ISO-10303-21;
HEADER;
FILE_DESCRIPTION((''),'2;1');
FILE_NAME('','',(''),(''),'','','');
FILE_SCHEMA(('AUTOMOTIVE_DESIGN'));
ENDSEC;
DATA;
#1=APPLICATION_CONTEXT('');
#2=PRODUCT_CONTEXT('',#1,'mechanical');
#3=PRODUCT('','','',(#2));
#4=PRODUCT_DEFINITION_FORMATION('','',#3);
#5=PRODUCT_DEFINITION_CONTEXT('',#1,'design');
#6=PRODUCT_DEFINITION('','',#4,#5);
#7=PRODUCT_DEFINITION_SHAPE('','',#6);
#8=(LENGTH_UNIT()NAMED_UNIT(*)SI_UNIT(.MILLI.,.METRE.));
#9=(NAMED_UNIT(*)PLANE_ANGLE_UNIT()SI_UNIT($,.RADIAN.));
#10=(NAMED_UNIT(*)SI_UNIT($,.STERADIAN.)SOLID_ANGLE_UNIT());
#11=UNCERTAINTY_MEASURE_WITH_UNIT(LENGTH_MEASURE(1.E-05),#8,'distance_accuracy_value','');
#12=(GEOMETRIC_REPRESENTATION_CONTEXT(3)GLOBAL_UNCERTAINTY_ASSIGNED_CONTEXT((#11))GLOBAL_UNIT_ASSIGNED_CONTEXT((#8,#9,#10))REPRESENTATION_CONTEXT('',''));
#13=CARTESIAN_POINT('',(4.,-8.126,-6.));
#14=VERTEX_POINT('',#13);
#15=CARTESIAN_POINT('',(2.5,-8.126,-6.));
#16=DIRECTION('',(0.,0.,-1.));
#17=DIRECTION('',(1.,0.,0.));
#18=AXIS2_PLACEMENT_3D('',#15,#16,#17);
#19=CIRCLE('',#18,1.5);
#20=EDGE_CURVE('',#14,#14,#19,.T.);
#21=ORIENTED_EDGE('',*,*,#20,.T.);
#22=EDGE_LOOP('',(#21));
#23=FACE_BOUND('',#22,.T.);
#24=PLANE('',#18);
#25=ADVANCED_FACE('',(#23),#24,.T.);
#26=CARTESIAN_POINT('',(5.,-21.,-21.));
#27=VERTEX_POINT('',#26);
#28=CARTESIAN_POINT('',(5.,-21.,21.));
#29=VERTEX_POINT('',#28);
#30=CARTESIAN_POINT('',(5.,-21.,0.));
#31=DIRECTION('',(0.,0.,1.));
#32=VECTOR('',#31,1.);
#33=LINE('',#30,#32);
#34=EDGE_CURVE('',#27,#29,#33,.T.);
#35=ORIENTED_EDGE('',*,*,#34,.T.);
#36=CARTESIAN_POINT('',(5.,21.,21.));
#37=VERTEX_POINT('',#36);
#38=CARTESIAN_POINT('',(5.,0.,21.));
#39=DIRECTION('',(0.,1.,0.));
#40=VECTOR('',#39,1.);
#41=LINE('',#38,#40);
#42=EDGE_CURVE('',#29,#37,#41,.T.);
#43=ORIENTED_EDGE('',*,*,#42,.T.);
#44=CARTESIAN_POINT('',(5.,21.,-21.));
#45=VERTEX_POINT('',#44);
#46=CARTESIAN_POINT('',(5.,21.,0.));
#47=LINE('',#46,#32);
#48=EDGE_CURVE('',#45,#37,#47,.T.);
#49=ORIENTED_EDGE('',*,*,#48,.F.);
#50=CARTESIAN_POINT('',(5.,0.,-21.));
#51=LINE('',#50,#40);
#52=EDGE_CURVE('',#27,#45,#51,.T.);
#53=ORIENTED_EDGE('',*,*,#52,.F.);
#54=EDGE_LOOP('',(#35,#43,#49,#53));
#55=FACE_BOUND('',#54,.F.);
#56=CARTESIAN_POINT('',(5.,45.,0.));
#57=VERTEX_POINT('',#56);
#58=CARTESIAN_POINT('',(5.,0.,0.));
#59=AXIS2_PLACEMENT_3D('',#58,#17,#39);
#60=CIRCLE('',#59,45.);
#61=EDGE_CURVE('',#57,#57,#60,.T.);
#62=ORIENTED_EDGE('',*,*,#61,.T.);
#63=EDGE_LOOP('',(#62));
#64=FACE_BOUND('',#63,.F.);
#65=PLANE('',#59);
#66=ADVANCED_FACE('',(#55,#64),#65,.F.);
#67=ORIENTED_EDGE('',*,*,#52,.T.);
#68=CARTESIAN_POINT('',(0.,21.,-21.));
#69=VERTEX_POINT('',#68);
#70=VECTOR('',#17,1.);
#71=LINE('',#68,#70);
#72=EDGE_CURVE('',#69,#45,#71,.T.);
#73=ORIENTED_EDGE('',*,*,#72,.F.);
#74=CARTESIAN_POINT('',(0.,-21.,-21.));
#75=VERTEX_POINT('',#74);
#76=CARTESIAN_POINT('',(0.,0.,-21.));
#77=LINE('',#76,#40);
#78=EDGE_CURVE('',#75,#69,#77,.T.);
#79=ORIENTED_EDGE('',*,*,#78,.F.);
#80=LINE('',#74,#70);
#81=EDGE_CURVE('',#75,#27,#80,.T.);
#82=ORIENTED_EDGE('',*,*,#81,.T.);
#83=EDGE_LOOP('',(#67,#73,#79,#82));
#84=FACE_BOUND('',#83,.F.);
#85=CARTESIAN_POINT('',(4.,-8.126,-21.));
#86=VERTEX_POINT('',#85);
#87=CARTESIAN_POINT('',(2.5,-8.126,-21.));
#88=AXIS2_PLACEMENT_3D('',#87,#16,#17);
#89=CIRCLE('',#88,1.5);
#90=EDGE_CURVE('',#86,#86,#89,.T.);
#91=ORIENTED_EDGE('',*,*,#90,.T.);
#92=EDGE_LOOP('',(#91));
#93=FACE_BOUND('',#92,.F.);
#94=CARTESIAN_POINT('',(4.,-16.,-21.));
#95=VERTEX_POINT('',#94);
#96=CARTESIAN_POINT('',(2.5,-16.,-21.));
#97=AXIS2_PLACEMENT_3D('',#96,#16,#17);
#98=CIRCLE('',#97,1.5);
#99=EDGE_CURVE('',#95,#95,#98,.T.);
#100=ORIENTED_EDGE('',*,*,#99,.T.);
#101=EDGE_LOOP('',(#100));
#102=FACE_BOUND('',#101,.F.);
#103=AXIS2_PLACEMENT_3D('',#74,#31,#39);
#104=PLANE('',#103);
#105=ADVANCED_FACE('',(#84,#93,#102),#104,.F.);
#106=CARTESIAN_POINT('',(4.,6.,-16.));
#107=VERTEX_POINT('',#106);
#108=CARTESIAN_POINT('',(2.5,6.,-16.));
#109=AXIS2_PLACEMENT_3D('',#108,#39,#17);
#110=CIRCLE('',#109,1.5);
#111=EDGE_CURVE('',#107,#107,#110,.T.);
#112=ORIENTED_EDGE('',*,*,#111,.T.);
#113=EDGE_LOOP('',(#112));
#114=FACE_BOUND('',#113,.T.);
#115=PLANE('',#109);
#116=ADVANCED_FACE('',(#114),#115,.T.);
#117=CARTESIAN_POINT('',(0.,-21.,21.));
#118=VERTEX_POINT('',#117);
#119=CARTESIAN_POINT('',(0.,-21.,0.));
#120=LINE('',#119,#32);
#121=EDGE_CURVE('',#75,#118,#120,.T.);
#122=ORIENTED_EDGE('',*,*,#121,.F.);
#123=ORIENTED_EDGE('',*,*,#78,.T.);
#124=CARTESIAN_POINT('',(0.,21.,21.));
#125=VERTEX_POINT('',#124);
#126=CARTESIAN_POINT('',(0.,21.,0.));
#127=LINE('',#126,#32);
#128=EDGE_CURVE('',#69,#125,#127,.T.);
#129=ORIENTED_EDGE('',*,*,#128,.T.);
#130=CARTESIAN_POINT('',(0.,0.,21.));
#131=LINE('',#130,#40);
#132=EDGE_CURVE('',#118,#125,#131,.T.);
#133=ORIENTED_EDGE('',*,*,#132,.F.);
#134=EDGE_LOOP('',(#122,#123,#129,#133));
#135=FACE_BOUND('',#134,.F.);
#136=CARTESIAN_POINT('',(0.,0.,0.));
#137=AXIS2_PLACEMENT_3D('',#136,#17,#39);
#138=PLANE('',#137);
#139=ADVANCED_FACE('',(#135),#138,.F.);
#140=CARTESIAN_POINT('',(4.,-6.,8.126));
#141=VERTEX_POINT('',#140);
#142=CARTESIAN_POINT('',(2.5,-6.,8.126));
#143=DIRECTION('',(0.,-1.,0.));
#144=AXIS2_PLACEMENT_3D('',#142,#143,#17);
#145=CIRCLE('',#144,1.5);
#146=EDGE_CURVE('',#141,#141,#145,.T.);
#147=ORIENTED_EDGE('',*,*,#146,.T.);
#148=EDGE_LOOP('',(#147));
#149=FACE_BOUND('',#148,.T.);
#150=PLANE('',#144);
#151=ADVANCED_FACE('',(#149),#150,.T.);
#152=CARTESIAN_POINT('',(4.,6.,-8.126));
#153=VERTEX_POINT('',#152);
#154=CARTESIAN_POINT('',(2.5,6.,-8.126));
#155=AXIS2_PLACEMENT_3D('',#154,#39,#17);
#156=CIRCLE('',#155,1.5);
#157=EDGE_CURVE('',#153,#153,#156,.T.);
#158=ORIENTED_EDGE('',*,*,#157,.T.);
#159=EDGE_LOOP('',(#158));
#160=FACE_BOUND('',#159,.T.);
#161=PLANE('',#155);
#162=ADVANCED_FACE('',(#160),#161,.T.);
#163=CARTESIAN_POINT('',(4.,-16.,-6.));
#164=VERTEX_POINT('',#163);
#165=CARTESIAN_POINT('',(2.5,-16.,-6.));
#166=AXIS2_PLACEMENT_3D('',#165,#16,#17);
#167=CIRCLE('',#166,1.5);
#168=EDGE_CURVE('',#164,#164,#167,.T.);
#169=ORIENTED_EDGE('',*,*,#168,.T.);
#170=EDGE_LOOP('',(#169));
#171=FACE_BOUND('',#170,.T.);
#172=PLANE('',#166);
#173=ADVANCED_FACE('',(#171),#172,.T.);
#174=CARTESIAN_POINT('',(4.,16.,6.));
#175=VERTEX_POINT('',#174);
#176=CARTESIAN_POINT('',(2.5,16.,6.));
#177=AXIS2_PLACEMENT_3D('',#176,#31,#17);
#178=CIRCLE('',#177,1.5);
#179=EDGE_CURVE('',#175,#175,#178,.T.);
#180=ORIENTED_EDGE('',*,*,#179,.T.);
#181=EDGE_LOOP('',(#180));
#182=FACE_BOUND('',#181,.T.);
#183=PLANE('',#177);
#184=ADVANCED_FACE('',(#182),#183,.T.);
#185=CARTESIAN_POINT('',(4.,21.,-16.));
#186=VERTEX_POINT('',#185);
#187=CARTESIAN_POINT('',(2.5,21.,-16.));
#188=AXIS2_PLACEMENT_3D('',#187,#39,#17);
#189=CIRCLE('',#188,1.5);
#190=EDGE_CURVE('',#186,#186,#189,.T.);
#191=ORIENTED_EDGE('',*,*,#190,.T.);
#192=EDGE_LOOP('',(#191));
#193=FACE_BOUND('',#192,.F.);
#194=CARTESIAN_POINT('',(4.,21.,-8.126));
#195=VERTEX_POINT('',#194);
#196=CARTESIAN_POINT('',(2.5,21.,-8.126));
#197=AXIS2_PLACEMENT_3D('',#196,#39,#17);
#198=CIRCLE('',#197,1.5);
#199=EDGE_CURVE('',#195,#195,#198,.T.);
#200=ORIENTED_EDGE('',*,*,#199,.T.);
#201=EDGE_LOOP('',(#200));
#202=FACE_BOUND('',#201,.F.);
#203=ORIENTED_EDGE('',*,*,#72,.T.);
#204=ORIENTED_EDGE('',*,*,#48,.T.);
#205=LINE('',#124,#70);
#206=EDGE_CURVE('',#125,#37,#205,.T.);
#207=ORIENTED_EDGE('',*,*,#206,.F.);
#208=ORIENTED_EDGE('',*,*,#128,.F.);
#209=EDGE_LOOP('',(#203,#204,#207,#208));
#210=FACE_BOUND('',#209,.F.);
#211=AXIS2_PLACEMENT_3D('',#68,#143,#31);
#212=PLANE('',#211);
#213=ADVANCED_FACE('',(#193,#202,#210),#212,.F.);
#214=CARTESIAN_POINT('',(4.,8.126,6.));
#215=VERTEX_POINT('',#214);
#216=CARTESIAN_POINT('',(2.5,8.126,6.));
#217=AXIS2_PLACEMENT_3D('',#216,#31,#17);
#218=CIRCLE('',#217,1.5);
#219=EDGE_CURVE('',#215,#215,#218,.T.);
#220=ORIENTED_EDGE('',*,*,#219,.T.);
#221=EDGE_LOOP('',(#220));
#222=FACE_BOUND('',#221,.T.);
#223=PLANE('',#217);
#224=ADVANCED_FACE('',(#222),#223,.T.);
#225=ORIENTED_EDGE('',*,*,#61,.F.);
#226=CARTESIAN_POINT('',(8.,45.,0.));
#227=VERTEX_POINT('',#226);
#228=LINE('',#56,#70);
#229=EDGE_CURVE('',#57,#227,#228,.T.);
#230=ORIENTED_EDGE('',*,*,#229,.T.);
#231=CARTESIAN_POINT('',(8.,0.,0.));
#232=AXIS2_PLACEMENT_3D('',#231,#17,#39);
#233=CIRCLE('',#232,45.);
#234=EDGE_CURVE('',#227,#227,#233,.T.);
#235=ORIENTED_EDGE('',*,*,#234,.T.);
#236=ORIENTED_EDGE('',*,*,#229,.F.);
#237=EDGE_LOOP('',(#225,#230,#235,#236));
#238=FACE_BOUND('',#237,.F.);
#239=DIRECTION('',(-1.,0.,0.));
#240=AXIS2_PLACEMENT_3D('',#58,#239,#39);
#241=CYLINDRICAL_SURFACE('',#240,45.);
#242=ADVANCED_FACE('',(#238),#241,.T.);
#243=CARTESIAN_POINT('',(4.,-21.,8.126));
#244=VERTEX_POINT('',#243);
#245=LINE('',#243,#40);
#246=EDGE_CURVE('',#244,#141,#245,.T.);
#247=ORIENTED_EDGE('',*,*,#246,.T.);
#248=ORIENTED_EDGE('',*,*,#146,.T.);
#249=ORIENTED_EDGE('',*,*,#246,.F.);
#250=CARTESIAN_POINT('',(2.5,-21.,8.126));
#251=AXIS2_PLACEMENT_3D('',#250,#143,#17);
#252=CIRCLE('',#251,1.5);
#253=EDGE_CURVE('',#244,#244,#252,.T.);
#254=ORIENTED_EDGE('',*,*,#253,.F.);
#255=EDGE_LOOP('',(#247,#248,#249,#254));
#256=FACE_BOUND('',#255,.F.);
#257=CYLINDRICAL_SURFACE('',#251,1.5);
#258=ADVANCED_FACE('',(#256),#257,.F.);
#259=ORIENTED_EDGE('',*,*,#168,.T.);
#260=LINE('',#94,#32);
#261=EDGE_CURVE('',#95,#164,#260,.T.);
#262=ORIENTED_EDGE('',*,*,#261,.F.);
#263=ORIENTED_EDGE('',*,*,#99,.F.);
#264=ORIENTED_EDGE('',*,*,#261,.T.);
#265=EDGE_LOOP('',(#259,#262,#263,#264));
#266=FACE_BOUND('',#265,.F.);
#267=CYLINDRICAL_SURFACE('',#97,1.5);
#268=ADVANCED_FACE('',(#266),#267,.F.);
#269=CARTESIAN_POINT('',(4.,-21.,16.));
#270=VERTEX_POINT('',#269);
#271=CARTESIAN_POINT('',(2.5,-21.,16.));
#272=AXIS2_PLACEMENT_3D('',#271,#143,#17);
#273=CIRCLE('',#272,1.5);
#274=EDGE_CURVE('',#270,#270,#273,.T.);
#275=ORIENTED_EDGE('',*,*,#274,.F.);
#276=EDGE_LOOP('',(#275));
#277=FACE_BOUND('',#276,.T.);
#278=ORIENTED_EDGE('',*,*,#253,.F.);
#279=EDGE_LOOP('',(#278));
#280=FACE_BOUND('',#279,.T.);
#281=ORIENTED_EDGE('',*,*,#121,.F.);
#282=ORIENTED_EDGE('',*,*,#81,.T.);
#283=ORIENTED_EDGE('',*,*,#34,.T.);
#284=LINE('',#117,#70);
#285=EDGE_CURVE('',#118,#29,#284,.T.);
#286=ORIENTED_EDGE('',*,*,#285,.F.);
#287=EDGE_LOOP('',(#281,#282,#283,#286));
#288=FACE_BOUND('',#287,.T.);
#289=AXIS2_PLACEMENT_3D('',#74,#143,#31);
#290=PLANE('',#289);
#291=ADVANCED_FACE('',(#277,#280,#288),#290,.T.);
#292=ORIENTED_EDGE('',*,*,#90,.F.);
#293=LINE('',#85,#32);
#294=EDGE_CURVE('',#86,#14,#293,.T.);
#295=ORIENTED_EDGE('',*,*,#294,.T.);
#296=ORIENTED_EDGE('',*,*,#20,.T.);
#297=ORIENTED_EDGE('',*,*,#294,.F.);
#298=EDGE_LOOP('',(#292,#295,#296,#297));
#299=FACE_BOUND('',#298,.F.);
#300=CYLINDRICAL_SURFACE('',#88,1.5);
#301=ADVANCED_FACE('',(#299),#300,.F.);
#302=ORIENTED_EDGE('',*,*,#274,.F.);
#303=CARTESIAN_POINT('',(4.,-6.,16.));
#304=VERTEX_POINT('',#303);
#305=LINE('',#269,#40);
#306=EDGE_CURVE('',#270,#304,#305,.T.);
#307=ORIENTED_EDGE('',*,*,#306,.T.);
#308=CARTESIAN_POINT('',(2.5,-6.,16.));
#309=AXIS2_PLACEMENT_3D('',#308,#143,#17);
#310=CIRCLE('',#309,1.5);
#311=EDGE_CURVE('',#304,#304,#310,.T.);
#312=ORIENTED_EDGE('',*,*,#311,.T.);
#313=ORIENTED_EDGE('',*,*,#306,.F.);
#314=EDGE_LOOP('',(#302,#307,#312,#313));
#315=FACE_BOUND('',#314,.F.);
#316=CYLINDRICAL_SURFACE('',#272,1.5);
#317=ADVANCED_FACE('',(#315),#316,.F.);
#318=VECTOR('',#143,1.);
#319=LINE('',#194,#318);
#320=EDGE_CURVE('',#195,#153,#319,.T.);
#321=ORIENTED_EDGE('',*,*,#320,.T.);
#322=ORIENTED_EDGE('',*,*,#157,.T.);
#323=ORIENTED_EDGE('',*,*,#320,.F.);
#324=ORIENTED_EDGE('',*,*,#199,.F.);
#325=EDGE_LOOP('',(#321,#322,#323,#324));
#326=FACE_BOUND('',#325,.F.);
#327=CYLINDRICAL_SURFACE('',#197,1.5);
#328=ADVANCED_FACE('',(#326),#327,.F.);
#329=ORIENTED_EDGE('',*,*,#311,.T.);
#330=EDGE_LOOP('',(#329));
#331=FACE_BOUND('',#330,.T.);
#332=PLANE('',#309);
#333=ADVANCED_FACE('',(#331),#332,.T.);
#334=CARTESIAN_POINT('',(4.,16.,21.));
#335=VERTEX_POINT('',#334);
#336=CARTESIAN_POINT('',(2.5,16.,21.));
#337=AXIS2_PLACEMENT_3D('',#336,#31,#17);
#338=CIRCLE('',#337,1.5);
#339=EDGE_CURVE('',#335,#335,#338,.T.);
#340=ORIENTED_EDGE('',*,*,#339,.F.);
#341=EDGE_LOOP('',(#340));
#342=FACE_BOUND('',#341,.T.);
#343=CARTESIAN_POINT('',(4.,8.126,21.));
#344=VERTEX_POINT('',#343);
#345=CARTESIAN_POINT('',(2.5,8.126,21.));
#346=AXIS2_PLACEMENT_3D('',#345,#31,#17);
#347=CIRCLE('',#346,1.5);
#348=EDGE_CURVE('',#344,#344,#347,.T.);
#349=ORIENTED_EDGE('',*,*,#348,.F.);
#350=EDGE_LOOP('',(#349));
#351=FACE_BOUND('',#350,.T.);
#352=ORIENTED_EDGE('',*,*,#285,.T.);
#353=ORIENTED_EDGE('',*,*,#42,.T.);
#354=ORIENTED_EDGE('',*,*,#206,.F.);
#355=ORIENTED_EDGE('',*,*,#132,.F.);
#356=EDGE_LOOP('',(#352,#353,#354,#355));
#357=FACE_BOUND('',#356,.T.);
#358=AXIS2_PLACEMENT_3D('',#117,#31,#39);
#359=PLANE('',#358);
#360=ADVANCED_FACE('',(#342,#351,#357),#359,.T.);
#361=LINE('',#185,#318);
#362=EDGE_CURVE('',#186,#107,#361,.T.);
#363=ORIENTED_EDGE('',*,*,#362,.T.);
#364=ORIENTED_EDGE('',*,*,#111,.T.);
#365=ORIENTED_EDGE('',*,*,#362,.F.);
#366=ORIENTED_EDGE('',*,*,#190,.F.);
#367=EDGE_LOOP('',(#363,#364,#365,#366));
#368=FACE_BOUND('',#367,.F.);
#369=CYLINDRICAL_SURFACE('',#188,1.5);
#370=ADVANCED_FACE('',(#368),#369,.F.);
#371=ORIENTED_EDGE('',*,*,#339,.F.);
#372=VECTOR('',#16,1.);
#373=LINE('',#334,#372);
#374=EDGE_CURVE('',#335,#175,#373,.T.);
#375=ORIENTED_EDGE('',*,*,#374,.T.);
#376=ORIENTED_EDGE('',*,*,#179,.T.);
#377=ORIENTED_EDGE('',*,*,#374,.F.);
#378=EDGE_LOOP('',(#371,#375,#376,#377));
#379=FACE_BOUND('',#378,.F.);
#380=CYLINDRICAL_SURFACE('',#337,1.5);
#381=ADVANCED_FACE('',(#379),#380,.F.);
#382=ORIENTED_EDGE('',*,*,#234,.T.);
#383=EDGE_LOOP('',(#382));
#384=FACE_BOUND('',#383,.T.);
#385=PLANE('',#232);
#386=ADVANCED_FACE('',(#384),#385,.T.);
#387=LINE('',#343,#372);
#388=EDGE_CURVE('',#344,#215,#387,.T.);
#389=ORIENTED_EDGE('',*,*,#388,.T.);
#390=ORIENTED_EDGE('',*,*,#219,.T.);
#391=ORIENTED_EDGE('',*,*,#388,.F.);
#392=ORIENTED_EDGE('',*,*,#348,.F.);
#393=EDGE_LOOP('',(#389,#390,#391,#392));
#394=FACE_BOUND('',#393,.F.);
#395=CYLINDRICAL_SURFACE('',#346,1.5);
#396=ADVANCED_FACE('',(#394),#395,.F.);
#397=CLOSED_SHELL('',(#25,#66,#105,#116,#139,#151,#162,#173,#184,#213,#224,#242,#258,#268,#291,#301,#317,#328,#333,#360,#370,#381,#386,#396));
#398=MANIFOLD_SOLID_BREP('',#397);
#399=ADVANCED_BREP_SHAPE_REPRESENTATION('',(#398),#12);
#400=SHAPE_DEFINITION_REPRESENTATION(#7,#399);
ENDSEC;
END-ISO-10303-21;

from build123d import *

# Parameters (mm, degrees)
F0_W            = 42
F0_H            = 42
F1_DEPTH        = 5
F2_R            = 1.5
F3_DEPTH        = 15
F3_COPIES_COUNT = 4
F5_R            = 45
F6_DEPTH        = 3


# Not quite as in the source:
# - a pattern or mirror of a feature is missing from the dataset's text; its kind, count and spacing are read off the source's solid


with BuildPart() as f1:
    # F0 (on Right) → F1 (new body)
    with BuildSketch(Plane.YZ):
        Rectangle(F0_W, F0_H)
    extrude(amount=F1_DEPTH)

    # F2 (on face) → F3 (cut)
    with BuildSketch(Plane.XZ.offset(21)):
        with Locations((2.5, 16)):
            Circle(F2_R)
        with Locations((2.5, 8.126)):
            Circle(F2_R)
    f3 = extrude(amount=-F3_DEPTH, mode=Mode.SUBTRACT)

    # F3_copies: F3 ×4 about axis
    f3_copies_axis = Axis((0, 0, 0), (1, 0, 0))
    for i in range(1, F3_COPIES_COUNT):
        add(f3.rotate(f3_copies_axis, i * 360 / F3_COPIES_COUNT), mode=Mode.SUBTRACT)

    # F5 (on face) → F6 (join)
    with BuildSketch(Plane.YZ.offset(5)):
        Circle(F5_R)
    extrude(amount=F6_DEPTH)


solid = f1.part
